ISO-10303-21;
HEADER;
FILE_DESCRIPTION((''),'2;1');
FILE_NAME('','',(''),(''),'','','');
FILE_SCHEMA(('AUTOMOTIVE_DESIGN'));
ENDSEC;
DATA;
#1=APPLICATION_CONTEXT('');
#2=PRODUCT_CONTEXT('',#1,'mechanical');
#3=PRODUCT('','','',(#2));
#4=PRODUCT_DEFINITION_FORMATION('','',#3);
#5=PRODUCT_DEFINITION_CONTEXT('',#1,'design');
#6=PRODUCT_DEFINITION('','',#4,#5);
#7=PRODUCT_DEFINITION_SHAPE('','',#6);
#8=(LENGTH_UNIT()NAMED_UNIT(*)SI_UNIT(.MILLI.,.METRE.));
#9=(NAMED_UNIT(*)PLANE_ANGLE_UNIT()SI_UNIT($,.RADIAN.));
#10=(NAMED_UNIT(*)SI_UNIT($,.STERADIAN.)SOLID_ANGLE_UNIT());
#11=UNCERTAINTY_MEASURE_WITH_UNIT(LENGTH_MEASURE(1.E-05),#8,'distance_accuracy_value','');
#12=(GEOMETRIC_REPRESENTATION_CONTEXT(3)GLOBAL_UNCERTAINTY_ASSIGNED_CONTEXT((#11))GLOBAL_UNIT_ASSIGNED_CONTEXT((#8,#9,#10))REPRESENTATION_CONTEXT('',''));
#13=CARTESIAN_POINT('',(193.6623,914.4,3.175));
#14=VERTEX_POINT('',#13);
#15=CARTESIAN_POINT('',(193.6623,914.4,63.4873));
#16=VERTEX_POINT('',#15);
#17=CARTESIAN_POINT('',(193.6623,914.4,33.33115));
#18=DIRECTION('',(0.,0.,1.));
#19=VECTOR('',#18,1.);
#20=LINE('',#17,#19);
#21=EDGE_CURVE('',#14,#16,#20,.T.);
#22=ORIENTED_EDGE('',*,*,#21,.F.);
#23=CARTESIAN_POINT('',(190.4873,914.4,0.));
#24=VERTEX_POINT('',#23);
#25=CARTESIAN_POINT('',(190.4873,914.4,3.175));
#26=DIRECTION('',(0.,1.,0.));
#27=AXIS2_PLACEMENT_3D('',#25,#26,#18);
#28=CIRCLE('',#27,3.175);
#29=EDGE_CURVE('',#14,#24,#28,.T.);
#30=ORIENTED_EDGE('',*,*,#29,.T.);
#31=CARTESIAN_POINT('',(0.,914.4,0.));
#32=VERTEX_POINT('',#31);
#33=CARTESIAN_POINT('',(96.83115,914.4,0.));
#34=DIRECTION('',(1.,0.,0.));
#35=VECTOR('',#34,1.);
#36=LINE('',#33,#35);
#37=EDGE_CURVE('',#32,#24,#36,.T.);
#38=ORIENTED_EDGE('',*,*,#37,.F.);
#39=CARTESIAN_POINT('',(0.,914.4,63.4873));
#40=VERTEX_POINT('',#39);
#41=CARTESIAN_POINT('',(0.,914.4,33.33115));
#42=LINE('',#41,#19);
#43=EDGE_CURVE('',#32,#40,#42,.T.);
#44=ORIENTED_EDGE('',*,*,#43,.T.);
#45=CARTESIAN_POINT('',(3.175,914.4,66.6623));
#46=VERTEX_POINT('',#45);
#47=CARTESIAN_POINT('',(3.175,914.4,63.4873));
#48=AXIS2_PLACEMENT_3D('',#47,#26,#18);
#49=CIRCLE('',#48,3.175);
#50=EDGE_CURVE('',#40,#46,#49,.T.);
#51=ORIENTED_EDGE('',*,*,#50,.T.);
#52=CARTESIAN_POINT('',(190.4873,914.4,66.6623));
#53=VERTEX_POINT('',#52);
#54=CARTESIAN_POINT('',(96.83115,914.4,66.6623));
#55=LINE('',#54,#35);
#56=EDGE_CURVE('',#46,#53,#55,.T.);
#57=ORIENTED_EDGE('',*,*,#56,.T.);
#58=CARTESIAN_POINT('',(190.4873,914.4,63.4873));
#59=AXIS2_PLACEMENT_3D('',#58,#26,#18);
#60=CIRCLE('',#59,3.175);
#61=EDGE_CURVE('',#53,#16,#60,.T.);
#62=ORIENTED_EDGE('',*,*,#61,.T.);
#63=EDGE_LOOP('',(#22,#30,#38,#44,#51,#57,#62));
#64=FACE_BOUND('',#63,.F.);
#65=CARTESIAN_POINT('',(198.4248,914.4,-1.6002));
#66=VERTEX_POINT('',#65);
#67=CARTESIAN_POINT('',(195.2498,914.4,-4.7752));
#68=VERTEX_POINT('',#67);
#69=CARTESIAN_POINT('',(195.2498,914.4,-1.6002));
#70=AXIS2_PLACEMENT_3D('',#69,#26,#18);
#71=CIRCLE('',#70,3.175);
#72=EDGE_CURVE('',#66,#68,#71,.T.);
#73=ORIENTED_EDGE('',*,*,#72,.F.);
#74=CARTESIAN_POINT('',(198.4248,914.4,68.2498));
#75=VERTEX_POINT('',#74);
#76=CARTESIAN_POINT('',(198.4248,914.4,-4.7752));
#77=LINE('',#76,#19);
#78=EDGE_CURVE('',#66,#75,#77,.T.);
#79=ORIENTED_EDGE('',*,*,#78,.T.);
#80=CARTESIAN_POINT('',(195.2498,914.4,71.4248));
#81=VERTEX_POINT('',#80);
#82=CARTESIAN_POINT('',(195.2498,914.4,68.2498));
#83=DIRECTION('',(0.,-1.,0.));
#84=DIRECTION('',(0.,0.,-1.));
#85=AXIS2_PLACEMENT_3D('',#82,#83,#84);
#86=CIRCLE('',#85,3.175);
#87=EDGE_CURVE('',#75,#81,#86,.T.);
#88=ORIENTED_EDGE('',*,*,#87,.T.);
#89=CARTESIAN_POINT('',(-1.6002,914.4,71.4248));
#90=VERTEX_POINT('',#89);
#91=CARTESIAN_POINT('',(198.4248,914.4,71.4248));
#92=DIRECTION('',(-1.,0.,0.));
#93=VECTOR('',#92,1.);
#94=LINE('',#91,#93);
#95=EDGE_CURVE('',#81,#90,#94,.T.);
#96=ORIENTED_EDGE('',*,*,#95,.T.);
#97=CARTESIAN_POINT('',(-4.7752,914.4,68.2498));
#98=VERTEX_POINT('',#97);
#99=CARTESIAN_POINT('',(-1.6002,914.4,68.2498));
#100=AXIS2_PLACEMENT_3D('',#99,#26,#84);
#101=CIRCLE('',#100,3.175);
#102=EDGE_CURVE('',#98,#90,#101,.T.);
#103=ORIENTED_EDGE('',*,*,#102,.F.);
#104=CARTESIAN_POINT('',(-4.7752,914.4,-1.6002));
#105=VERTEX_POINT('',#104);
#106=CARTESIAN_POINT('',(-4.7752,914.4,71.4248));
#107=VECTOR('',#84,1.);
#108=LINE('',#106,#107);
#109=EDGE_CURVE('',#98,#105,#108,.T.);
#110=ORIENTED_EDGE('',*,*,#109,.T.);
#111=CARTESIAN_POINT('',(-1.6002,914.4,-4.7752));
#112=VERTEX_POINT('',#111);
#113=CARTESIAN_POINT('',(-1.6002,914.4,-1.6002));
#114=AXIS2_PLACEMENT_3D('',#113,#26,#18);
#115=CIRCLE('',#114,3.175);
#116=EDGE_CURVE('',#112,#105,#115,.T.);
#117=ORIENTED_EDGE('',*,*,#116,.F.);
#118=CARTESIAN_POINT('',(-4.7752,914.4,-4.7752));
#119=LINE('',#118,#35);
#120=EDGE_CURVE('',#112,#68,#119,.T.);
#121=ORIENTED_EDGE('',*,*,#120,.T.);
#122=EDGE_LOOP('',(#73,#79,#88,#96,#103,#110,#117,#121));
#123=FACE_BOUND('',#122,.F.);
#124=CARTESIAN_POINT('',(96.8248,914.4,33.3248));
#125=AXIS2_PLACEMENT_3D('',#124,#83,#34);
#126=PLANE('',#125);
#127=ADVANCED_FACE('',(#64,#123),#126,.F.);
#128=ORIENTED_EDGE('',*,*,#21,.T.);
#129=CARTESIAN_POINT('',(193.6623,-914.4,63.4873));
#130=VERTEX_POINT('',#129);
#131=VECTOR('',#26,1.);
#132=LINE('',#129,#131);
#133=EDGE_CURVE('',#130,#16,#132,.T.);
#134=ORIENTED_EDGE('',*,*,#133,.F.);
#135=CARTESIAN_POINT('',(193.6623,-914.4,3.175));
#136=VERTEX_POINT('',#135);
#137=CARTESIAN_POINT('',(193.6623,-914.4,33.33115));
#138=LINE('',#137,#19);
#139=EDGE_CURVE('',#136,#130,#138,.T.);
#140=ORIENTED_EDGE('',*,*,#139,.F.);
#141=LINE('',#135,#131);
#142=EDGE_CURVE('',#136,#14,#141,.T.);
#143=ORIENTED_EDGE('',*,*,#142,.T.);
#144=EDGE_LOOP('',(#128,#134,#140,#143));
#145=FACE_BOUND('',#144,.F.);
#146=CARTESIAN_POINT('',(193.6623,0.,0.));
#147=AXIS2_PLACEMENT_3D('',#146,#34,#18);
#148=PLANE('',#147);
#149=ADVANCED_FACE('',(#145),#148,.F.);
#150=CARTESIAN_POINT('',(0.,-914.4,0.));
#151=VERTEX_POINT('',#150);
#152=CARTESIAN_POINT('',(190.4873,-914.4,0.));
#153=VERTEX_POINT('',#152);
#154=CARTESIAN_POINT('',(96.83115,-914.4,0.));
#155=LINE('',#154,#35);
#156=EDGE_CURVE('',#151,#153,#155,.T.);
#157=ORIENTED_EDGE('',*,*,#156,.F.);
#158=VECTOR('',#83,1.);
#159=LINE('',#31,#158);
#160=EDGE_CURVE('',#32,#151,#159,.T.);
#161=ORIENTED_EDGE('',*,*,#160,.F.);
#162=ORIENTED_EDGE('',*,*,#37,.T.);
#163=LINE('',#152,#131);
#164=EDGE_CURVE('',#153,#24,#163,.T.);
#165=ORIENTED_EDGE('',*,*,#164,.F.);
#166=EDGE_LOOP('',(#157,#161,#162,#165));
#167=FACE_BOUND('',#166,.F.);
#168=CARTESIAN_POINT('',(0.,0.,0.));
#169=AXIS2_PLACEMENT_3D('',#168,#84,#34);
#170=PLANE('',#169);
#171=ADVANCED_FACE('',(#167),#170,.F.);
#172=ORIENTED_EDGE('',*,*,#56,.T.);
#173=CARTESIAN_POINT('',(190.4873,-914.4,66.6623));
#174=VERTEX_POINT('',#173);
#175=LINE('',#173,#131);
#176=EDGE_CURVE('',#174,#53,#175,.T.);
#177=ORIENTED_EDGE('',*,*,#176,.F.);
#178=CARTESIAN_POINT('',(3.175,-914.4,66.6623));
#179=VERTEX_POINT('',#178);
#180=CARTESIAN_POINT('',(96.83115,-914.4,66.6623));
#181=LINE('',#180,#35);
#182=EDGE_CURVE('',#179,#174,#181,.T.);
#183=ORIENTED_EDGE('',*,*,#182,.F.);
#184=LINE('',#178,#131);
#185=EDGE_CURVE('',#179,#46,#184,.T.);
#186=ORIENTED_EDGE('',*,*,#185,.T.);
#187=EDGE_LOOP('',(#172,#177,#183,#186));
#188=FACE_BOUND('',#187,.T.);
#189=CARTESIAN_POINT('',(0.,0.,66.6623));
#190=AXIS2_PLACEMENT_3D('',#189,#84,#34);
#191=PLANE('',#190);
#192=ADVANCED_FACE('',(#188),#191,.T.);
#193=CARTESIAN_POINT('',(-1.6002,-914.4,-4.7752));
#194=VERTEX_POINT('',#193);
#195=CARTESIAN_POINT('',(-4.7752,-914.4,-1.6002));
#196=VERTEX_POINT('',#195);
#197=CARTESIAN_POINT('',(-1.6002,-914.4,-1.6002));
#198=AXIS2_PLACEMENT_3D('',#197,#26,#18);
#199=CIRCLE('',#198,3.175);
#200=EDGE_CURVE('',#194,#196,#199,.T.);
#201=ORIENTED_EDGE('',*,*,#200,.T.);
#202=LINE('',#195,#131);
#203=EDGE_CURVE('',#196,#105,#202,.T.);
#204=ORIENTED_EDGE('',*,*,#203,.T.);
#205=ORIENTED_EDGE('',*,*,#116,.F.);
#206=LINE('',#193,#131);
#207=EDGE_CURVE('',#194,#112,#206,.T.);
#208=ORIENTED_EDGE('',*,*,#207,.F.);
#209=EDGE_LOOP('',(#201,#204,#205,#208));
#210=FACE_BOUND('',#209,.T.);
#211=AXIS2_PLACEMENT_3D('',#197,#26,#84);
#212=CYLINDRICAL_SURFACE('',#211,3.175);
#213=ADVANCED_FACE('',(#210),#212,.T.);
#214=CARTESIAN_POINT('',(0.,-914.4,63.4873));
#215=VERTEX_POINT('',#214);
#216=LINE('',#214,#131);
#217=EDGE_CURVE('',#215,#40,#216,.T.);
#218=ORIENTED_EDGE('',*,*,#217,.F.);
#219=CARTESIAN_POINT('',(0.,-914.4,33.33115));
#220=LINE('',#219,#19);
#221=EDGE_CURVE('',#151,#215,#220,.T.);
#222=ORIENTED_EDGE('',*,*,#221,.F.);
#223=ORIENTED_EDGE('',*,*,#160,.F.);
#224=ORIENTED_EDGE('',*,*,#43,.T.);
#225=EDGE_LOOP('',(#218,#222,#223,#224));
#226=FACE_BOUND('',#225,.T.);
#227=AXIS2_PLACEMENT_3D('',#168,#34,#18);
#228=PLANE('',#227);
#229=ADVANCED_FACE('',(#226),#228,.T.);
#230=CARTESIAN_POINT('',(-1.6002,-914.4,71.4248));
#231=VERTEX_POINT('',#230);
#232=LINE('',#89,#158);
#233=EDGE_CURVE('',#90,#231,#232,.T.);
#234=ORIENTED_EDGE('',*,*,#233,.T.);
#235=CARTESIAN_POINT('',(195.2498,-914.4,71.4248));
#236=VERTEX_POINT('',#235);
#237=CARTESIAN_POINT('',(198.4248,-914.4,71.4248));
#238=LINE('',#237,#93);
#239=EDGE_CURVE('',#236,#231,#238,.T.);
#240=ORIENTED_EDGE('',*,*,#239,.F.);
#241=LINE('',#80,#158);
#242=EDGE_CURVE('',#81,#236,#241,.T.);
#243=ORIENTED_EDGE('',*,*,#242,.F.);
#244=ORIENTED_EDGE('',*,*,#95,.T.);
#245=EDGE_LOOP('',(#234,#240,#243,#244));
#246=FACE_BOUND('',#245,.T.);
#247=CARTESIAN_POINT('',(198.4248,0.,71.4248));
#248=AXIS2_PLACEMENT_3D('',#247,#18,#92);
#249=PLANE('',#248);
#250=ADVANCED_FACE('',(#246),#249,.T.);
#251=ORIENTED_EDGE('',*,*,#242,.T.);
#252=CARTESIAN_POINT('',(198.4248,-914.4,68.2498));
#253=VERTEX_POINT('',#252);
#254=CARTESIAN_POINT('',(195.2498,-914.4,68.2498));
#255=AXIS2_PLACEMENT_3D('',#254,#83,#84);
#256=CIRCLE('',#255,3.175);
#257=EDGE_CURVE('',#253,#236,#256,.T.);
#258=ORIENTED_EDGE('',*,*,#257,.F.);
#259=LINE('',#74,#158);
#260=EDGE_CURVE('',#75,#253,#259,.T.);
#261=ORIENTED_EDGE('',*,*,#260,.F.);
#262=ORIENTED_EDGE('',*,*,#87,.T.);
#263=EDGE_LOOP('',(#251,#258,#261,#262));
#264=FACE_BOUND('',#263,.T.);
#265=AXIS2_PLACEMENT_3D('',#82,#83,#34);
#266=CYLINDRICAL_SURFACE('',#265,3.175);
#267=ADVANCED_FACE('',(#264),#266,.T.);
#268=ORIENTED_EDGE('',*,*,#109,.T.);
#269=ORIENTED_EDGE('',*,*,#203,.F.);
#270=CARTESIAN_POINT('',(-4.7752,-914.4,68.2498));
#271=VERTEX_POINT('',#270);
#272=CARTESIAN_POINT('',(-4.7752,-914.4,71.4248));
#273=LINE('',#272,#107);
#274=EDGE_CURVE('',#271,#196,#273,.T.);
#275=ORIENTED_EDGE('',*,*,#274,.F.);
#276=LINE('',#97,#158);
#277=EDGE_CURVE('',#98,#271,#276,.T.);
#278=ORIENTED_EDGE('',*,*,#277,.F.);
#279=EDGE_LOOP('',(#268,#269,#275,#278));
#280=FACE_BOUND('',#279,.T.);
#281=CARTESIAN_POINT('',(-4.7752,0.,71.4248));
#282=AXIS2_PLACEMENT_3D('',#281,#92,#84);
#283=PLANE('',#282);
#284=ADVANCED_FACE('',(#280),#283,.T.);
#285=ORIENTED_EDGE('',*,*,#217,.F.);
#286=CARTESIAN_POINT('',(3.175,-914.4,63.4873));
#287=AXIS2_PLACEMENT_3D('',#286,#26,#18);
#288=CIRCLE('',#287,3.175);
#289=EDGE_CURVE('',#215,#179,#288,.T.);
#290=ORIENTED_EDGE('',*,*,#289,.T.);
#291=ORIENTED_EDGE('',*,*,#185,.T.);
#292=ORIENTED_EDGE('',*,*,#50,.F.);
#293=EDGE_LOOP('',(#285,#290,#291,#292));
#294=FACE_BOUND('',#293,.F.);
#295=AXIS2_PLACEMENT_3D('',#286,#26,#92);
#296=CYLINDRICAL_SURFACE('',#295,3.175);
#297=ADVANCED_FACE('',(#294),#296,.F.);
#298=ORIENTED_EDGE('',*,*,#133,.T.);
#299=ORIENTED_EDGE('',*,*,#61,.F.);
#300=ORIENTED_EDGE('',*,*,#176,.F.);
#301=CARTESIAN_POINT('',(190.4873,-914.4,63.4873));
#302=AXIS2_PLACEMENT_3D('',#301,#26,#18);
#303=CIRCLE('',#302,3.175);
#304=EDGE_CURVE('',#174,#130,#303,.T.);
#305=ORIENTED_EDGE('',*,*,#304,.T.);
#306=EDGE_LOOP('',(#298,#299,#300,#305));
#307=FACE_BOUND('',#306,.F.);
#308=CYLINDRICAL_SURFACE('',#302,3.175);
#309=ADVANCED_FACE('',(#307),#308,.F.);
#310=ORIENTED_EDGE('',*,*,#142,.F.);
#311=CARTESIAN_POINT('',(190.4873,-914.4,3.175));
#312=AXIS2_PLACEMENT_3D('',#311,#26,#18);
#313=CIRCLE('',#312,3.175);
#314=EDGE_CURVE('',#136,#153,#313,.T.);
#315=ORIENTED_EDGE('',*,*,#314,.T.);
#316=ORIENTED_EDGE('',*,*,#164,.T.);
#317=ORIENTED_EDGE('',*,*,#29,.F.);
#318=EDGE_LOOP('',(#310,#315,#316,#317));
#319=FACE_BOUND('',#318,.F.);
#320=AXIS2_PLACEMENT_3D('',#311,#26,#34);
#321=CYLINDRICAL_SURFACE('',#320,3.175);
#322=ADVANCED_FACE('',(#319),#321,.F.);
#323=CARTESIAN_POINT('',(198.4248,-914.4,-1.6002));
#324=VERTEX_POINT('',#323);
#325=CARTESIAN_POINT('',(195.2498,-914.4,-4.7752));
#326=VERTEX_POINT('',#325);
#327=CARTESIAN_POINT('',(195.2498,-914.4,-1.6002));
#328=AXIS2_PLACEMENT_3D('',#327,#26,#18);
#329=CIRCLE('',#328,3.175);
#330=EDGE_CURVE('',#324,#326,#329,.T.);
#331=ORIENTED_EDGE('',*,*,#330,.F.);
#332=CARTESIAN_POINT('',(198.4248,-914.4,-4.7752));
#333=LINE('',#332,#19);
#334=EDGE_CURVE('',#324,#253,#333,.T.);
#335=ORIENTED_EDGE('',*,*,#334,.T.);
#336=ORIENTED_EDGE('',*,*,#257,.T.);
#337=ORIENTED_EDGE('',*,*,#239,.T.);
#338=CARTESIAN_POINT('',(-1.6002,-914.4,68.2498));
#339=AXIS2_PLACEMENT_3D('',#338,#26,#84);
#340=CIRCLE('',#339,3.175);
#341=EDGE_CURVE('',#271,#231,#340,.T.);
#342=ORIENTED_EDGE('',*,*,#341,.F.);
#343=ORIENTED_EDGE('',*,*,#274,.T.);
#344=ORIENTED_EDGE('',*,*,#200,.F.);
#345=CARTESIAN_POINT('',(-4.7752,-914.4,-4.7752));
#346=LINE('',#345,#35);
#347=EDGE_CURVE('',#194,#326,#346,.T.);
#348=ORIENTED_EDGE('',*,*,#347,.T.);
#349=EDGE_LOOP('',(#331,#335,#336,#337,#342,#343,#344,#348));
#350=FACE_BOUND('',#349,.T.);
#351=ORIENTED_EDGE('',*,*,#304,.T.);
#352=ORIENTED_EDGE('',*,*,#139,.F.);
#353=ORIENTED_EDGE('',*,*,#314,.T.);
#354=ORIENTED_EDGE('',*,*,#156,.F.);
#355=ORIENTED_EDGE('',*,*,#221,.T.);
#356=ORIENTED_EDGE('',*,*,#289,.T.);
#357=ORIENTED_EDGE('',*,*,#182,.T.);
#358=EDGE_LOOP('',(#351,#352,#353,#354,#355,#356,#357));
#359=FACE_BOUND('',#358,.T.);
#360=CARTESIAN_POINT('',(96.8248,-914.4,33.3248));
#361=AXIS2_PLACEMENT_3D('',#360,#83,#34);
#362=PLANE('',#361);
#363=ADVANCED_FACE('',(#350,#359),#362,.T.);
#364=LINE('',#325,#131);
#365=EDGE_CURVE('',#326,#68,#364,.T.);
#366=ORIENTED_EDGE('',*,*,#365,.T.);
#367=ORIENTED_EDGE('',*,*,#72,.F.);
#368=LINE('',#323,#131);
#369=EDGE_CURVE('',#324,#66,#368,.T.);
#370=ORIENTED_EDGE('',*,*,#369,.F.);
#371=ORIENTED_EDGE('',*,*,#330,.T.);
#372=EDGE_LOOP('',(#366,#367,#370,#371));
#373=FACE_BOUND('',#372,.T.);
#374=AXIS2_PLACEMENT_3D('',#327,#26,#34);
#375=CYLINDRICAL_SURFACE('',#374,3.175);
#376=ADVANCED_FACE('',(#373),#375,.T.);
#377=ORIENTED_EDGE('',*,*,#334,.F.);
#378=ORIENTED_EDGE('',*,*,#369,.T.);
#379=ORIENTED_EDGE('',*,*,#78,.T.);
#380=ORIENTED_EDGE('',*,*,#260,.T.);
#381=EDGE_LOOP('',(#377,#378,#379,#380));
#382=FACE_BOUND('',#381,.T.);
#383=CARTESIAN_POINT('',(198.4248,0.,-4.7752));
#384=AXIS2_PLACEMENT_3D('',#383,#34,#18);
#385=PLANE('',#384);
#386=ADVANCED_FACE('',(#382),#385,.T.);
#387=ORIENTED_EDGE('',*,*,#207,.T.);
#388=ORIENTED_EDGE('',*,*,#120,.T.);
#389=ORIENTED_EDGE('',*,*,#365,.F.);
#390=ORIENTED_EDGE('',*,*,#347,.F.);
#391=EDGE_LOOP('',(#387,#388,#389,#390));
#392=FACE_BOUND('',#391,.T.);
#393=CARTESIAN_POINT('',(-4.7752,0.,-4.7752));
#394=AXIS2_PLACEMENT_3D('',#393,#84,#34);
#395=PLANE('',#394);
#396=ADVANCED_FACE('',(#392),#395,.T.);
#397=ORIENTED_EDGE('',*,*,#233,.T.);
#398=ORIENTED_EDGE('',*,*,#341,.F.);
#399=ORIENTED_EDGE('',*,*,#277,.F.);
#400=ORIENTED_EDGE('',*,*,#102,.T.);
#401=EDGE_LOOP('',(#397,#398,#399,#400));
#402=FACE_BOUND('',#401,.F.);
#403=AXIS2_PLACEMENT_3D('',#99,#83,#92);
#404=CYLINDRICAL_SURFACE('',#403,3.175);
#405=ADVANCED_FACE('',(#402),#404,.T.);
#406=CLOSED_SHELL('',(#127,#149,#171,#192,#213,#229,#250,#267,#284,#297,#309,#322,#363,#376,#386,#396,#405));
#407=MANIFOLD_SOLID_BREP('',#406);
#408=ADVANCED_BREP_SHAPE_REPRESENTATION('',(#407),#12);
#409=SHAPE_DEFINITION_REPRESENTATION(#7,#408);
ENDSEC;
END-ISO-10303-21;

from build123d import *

# Parameters (mm, degrees)
F0_W     = 193.6623
F0_H     = 66.6623
F1_DEPTH = 914.4
F2_R     = 3.175


with BuildPart() as f1:
    # F0 (on Front) → F1 (new body, symmetric)
    with BuildSketch(Plane.XZ):
        Polygon((198.4248, -4.7752), (198.4248, 66.6623), (198.4248, 71.4248), (-4.7752, 71.4248), (-4.7752, -4.7752), align=None)
        with Locations((96.83115, 33.33115)):
            Rectangle(F0_W, F0_H, mode=Mode.SUBTRACT)
    extrude(amount=F1_DEPTH, both=True)

    # F2
    f2_edges = [f1.edges().sort_by_distance(p)[0] for p in [
        (-4.7752, 0, 71.4248),
        (0, 0, 66.6623),
        (-4.7752, 0, -4.7752),
        (198.4248, 0, -4.7752),
        (198.4248, 0, 71.4248),
        (193.6623, 0, 0),
        (193.6623, 0, 66.6623),
    ]]
    fillet(f2_edges, radius=F2_R)


solid = f1.part
